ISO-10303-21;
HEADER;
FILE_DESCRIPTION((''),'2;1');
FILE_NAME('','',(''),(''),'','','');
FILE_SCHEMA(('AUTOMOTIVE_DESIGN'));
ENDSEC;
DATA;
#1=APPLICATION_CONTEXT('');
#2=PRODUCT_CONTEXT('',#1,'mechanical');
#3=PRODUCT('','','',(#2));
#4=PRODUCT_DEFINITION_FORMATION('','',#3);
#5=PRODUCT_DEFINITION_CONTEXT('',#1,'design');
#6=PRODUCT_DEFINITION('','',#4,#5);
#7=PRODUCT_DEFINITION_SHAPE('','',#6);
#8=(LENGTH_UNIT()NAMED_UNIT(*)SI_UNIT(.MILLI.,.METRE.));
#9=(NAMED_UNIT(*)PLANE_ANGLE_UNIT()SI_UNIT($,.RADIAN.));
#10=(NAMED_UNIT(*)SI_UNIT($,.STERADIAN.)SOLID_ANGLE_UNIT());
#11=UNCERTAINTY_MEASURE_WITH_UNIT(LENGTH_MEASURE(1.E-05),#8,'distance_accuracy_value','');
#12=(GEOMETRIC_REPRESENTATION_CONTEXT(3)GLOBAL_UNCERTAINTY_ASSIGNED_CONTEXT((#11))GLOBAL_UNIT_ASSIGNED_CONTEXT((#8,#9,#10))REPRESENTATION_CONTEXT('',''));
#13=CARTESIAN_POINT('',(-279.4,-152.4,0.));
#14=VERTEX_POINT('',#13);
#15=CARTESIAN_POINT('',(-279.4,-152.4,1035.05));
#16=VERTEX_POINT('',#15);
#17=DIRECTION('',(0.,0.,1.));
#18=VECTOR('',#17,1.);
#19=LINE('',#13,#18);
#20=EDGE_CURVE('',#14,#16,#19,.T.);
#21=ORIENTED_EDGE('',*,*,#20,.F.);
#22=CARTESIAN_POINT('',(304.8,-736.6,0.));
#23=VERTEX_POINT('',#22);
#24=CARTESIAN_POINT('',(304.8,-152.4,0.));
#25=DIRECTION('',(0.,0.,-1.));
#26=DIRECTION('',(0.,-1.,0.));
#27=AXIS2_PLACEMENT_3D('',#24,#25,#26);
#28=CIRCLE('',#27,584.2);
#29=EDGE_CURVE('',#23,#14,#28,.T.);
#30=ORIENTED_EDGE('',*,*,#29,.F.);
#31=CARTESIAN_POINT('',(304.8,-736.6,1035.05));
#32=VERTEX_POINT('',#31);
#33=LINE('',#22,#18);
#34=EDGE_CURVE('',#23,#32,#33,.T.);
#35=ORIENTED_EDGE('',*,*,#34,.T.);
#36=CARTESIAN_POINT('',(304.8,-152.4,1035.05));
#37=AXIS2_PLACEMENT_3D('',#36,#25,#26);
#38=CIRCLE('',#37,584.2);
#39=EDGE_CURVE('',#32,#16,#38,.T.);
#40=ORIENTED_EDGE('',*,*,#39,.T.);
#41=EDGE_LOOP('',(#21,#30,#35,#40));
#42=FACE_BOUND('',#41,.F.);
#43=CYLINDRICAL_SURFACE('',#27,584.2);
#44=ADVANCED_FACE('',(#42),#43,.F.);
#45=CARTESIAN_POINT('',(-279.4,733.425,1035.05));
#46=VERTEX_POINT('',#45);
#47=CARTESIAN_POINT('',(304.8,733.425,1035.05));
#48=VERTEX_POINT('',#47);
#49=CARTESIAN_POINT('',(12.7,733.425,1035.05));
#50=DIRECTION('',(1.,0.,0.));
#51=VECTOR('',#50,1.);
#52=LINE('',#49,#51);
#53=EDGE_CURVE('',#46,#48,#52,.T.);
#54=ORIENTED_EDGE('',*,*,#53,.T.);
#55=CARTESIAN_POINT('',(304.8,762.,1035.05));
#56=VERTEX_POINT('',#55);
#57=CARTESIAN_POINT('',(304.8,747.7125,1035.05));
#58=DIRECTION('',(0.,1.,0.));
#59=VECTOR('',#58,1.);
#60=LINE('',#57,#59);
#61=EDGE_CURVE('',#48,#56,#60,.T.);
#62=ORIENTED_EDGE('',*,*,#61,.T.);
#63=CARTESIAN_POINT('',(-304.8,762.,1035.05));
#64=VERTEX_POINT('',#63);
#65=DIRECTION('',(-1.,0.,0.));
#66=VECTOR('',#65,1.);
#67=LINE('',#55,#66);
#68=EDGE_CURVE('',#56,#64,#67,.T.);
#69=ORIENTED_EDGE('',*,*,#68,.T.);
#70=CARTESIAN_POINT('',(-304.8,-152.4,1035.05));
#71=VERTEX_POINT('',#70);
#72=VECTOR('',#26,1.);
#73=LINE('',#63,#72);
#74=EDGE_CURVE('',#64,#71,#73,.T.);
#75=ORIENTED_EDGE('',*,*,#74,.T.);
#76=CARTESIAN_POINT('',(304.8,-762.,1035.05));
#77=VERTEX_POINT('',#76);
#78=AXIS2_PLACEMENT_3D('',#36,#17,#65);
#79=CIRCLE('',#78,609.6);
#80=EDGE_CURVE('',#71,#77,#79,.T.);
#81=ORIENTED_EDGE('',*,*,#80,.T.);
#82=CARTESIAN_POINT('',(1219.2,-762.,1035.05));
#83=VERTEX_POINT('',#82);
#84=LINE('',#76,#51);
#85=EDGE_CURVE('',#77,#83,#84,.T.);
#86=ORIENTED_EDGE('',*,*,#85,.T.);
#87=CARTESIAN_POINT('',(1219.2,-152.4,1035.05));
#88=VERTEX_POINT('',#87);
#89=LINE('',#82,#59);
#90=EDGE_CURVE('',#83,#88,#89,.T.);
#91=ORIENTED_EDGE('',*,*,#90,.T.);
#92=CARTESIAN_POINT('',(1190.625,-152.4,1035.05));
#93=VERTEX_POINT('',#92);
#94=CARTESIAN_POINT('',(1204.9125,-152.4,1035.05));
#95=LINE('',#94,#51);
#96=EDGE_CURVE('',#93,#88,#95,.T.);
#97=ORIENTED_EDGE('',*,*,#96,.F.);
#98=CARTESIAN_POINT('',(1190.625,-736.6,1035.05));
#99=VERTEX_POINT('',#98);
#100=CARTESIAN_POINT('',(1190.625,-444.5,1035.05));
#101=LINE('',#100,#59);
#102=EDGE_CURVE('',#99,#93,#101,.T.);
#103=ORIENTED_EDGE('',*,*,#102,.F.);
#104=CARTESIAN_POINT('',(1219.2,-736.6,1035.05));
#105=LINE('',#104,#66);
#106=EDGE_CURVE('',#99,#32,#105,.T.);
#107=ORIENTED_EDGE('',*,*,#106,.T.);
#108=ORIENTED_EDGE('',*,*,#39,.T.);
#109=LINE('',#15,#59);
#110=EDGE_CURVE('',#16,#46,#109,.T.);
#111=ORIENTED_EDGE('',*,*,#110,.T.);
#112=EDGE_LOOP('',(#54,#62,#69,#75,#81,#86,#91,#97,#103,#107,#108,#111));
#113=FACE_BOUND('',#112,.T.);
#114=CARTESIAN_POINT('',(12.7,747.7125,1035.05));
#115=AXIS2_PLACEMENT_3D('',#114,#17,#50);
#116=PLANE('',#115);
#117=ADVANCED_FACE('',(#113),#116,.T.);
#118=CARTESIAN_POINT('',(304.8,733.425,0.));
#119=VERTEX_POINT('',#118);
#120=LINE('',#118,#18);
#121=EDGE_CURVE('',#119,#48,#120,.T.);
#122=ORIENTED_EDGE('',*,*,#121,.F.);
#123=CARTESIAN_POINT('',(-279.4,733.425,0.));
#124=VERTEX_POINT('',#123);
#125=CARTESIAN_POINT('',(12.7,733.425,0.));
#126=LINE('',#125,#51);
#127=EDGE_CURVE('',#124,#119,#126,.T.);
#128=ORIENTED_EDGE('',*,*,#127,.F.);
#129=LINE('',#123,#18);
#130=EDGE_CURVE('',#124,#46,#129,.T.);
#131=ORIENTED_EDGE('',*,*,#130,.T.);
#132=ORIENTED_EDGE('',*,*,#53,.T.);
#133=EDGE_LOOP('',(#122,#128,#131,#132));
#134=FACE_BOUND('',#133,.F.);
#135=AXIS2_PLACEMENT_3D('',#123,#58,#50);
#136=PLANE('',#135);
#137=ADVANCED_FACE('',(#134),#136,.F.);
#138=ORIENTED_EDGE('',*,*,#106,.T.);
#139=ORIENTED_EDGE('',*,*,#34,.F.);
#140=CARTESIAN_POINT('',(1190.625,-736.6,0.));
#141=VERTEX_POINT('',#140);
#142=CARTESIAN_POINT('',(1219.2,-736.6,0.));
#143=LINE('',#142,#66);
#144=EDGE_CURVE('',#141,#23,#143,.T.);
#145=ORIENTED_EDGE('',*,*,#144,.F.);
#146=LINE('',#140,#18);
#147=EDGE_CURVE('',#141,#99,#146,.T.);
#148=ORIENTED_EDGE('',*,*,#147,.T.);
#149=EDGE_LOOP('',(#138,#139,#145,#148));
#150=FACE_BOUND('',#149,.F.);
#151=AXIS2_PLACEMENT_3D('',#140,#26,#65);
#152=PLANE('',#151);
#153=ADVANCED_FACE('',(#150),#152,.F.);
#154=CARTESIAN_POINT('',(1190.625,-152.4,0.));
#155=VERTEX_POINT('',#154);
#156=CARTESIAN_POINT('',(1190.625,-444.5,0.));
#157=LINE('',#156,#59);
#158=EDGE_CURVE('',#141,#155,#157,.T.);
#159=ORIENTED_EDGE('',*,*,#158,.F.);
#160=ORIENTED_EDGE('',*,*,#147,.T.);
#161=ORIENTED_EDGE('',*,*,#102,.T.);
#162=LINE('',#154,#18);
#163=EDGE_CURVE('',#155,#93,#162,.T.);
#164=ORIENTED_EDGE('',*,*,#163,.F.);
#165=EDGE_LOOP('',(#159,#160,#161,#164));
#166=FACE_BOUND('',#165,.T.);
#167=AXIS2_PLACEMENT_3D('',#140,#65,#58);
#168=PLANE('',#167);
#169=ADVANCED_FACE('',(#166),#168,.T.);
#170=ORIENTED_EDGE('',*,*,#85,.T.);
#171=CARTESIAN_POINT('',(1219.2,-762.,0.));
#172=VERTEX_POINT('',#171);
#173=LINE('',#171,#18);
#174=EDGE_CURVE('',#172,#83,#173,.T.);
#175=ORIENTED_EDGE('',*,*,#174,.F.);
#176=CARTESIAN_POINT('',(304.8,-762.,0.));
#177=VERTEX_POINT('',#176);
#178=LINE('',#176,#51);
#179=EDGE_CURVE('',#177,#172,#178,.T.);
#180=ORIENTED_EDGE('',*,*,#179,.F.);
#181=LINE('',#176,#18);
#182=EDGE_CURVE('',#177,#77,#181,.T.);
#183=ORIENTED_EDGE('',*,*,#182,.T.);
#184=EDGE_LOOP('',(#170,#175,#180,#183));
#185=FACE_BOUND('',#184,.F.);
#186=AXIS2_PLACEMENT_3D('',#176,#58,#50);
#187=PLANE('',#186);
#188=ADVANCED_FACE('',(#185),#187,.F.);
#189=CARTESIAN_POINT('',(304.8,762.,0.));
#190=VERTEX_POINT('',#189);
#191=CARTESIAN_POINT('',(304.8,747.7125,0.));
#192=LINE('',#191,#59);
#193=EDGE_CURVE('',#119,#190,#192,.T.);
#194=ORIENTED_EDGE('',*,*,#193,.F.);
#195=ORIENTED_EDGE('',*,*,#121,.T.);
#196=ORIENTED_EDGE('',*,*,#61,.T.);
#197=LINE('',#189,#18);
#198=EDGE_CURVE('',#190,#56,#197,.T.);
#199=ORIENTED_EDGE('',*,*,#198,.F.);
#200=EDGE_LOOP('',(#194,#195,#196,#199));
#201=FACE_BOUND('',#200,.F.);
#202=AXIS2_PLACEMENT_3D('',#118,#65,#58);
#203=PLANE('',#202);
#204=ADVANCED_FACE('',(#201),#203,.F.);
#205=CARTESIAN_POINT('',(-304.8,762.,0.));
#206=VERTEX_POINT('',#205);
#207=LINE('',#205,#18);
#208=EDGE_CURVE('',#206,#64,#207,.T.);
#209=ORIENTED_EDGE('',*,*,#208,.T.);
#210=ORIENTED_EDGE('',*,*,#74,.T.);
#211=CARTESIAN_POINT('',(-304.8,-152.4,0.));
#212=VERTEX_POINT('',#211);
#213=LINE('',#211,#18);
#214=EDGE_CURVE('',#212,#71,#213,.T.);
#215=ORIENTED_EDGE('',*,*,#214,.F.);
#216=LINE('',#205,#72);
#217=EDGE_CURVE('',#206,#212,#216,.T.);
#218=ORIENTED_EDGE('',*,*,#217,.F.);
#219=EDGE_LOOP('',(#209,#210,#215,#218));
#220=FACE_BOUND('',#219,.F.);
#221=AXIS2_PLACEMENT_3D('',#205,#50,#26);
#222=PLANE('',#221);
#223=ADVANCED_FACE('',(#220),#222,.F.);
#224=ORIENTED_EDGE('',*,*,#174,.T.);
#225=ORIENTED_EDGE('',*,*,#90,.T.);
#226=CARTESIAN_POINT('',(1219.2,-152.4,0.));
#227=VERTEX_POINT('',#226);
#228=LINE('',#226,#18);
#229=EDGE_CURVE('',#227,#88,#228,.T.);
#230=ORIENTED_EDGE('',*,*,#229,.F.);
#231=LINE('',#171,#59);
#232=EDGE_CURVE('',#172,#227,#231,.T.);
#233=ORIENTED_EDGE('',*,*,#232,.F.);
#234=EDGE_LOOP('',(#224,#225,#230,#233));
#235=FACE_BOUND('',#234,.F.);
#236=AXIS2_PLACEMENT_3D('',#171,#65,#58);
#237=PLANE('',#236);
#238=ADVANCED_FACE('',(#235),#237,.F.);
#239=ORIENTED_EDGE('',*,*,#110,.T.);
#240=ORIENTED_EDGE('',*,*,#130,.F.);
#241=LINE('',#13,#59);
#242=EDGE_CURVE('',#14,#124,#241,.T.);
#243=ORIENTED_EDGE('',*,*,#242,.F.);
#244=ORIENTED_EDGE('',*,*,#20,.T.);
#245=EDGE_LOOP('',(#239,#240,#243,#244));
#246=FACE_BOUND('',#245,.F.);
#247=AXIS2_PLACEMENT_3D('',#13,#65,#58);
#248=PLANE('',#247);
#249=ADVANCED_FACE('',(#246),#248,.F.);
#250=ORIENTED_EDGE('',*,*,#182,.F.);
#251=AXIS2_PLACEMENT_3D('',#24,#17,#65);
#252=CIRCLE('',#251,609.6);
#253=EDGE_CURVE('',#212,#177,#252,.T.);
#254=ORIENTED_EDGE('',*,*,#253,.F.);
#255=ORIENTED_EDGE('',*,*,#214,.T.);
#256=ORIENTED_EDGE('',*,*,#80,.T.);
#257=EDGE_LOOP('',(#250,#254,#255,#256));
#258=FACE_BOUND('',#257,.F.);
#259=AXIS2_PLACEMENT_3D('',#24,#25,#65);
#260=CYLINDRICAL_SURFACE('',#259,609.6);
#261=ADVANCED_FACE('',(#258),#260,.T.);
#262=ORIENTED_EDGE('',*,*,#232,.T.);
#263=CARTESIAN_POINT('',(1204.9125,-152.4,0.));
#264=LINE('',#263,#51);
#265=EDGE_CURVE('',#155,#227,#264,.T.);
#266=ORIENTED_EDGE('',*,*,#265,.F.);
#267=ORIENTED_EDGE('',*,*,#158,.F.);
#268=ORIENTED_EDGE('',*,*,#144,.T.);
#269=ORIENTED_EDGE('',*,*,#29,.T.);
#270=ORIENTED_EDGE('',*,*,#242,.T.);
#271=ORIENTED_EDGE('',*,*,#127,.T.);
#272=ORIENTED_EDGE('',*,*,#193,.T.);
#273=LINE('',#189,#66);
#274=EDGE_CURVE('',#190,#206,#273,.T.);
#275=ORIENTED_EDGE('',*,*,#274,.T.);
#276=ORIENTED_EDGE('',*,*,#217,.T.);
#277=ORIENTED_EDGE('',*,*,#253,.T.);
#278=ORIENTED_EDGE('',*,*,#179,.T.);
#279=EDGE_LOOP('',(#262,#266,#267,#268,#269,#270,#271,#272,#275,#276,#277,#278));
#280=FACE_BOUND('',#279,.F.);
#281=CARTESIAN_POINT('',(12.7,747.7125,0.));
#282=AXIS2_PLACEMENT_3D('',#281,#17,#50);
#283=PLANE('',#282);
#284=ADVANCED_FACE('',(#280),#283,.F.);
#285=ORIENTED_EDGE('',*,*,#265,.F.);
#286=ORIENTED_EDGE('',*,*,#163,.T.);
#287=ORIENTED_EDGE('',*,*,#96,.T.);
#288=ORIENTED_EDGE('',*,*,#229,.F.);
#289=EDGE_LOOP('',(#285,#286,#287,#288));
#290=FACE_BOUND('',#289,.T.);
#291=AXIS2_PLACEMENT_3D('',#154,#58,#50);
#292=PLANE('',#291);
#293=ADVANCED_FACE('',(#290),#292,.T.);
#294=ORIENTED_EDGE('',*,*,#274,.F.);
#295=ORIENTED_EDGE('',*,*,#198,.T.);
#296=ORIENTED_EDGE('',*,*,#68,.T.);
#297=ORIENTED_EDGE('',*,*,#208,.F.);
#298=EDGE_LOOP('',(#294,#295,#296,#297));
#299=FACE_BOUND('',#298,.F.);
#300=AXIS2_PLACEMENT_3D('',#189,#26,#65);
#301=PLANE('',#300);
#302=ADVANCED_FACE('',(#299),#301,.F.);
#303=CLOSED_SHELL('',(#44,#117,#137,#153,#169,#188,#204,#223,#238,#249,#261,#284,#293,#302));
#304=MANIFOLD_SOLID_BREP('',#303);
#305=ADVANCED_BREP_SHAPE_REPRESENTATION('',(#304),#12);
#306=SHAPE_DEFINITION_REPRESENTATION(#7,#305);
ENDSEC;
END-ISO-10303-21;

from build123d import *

# Parameters (mm, degrees)
F0_W     = 584.2
F0_H     = 28.575
F0_W_2   = 28.575
F0_H_2   = 584.2
F1_DEPTH = 1035.05


with BuildPart() as f1:
    # F0 (on Top) → F1 (new body)
    with BuildSketch(Plane.XY):
        with Locations((12.7, 747.7125)):
            Rectangle(F0_W, F0_H)
        Polygon((-279.4, 733.425), (-279.4, 762), (-304.8, 762), (-304.8, -152.4), (-279.4, -152.4), align=None)
        with BuildLine():
            Line((-279.4, -152.4), (-304.8, -152.4))
            ThreePointArc((-304.8, -152.4), (-126.2522938113, -583.4522938113), (304.8, -762))
            Line((304.8, -762), (304.8, -736.6))
            ThreePointArc((304.8, -736.6), (-108.2917815692, -565.4917815692), (-279.4, -152.4))
        make_face()
        Polygon((304.8, -736.6), (304.8, -762), (1219.2, -762), (1219.2, -736.6), (1190.625, -736.6), align=None)
        with Locations((1204.9125, -444.5)):
            Rectangle(F0_W_2, F0_H_2)
    extrude(amount=F1_DEPTH)


solid = f1.part
